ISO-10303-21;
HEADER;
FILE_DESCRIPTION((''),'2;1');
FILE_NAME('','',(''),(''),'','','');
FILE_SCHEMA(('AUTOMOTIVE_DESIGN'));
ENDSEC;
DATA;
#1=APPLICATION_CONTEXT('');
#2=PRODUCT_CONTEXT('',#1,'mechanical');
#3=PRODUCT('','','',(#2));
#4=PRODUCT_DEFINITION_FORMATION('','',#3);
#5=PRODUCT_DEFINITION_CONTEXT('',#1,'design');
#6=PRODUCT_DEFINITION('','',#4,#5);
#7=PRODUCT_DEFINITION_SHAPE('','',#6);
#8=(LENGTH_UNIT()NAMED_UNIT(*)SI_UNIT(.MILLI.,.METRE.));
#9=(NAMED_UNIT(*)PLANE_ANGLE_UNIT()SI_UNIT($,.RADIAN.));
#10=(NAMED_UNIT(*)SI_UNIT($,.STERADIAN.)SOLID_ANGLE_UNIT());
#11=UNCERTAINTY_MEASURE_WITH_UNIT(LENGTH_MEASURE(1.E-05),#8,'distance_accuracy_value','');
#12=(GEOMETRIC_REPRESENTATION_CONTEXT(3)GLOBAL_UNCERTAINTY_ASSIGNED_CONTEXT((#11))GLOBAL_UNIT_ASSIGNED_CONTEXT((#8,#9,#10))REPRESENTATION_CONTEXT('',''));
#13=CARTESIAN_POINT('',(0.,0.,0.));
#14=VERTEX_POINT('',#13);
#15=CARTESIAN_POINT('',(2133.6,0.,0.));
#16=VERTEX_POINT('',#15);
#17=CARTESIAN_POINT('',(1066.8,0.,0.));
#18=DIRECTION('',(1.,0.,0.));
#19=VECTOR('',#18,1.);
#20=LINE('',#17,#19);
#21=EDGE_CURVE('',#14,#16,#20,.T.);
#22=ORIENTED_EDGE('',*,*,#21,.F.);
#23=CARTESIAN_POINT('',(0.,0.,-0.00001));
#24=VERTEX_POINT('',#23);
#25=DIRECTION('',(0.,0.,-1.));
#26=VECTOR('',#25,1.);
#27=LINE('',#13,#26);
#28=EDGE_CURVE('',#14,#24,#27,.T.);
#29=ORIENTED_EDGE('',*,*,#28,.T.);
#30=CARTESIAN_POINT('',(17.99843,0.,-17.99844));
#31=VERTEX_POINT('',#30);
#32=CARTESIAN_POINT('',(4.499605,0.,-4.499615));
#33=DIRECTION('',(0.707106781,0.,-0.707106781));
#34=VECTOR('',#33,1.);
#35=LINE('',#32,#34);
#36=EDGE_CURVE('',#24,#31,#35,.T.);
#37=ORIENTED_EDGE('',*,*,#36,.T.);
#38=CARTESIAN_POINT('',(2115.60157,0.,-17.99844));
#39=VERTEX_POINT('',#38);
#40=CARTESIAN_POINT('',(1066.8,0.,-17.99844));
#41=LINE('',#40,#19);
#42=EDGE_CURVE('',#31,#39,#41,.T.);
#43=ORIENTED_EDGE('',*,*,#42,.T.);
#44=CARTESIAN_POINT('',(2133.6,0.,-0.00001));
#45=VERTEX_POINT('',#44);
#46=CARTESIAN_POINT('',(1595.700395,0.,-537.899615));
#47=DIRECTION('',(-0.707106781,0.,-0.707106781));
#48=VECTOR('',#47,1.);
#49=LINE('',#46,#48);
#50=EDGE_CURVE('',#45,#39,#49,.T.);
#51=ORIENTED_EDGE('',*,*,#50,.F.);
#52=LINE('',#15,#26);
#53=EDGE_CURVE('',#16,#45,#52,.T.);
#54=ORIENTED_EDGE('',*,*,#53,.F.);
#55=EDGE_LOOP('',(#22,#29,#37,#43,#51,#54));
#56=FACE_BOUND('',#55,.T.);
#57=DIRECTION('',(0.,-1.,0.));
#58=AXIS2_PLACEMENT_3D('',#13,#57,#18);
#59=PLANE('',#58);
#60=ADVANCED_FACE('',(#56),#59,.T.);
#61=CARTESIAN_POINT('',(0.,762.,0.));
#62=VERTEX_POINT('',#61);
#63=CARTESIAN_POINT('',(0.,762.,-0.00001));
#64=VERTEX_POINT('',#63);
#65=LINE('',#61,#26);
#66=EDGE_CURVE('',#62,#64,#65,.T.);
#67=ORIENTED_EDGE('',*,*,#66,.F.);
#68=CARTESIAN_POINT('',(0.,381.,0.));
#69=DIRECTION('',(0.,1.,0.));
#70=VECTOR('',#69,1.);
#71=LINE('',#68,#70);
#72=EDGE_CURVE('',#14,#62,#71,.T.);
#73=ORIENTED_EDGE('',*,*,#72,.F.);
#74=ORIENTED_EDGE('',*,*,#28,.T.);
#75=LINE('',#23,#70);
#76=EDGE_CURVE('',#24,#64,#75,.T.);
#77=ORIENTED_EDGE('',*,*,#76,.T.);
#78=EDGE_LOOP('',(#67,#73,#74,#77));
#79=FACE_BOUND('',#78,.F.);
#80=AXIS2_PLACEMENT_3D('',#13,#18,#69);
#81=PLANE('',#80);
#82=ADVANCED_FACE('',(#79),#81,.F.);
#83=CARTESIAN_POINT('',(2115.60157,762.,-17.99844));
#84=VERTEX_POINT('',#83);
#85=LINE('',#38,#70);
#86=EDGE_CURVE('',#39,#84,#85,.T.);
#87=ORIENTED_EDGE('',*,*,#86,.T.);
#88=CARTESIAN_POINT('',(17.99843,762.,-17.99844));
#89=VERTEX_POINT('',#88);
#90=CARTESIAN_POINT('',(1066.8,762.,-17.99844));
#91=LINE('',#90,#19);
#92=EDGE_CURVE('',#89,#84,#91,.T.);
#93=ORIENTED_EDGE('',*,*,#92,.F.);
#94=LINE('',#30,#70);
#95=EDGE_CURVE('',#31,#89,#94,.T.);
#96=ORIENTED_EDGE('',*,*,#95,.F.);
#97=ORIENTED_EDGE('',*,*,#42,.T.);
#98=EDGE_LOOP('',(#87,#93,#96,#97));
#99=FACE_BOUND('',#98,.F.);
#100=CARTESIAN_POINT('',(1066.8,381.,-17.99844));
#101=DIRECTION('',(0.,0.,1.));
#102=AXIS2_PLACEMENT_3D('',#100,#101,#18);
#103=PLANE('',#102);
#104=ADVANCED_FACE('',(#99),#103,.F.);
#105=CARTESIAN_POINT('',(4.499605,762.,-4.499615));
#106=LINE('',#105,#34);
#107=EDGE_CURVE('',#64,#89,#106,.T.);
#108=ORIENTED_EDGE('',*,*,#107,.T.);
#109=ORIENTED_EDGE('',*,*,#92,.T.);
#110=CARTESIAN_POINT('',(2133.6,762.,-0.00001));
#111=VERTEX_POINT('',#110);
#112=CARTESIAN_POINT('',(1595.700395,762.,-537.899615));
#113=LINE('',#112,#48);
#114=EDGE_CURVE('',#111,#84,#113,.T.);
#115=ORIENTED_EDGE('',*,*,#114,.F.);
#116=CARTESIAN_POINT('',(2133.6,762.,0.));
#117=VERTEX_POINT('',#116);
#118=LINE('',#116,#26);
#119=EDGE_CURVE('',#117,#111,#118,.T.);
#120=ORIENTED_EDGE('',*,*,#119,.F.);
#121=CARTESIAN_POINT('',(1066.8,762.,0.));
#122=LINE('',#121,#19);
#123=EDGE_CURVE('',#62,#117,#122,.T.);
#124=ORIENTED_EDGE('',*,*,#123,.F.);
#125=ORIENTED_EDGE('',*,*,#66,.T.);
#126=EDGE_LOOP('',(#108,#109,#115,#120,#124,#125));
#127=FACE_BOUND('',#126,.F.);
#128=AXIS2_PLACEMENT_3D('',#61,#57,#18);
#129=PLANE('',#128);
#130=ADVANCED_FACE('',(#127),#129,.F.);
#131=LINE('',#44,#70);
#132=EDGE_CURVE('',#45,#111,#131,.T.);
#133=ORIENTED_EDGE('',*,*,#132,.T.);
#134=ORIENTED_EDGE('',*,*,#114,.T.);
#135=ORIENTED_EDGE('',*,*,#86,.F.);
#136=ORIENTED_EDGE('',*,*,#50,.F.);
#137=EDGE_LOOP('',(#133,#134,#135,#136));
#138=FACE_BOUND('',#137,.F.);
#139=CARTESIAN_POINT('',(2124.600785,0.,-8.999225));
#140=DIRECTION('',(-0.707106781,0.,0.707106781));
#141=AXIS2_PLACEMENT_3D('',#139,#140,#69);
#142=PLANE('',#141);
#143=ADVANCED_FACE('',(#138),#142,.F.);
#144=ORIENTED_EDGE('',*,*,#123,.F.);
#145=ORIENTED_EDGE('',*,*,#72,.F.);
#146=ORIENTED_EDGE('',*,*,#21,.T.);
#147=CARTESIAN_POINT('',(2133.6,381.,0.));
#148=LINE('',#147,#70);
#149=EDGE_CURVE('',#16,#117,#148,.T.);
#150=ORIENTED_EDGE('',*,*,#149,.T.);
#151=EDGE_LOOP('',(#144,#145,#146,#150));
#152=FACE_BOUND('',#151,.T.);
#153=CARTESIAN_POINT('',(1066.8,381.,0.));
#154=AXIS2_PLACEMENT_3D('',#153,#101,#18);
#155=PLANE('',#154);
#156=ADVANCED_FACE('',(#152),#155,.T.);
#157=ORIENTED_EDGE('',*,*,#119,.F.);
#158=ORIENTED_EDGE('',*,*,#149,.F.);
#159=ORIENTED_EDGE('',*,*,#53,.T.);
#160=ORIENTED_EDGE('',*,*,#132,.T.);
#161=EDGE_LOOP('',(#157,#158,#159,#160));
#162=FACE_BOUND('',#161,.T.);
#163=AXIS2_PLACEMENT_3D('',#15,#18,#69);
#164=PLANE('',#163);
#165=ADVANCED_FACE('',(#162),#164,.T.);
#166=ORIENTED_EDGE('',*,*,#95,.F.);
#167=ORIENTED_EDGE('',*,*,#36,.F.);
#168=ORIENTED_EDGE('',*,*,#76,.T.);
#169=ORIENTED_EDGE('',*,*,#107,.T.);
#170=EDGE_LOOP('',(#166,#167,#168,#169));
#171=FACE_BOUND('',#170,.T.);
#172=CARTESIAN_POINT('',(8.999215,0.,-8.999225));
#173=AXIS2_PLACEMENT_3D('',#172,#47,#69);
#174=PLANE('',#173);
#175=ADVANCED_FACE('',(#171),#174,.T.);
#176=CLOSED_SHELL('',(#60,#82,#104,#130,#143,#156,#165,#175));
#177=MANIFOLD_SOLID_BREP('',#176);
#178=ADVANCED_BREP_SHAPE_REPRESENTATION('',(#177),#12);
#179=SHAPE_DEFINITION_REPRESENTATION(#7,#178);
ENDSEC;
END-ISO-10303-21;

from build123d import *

# Parameters (mm, degrees)
F0_W     = 2133.6
F0_H     = 762
F1_DEPTH = 17.99844
F2_SIZE  = 17.99843


# Not quite as in the source:
# - a fillet or chamfer is up to 0.001 mm smaller than in the source, because OpenCascade refuses the exact size


with BuildPart() as f1:
    # F0 (on Top) → F1 (new body)
    with BuildSketch(Plane.XY):
        with Locations((1066.8, 381)):
            Rectangle(F0_W, F0_H)
    extrude(amount=-F1_DEPTH)

    # F2 (size 17.99844 in the source; OpenCascade refuses exactly that, so slightly less here)
    f2_edges = [f1.edges().sort_by_distance(p)[0] for p in [
        (2133.6, 381, -17.99844),
        (0, 381, -17.99844),
    ]]
    chamfer(f2_edges, length=F2_SIZE)


solid = f1.part
